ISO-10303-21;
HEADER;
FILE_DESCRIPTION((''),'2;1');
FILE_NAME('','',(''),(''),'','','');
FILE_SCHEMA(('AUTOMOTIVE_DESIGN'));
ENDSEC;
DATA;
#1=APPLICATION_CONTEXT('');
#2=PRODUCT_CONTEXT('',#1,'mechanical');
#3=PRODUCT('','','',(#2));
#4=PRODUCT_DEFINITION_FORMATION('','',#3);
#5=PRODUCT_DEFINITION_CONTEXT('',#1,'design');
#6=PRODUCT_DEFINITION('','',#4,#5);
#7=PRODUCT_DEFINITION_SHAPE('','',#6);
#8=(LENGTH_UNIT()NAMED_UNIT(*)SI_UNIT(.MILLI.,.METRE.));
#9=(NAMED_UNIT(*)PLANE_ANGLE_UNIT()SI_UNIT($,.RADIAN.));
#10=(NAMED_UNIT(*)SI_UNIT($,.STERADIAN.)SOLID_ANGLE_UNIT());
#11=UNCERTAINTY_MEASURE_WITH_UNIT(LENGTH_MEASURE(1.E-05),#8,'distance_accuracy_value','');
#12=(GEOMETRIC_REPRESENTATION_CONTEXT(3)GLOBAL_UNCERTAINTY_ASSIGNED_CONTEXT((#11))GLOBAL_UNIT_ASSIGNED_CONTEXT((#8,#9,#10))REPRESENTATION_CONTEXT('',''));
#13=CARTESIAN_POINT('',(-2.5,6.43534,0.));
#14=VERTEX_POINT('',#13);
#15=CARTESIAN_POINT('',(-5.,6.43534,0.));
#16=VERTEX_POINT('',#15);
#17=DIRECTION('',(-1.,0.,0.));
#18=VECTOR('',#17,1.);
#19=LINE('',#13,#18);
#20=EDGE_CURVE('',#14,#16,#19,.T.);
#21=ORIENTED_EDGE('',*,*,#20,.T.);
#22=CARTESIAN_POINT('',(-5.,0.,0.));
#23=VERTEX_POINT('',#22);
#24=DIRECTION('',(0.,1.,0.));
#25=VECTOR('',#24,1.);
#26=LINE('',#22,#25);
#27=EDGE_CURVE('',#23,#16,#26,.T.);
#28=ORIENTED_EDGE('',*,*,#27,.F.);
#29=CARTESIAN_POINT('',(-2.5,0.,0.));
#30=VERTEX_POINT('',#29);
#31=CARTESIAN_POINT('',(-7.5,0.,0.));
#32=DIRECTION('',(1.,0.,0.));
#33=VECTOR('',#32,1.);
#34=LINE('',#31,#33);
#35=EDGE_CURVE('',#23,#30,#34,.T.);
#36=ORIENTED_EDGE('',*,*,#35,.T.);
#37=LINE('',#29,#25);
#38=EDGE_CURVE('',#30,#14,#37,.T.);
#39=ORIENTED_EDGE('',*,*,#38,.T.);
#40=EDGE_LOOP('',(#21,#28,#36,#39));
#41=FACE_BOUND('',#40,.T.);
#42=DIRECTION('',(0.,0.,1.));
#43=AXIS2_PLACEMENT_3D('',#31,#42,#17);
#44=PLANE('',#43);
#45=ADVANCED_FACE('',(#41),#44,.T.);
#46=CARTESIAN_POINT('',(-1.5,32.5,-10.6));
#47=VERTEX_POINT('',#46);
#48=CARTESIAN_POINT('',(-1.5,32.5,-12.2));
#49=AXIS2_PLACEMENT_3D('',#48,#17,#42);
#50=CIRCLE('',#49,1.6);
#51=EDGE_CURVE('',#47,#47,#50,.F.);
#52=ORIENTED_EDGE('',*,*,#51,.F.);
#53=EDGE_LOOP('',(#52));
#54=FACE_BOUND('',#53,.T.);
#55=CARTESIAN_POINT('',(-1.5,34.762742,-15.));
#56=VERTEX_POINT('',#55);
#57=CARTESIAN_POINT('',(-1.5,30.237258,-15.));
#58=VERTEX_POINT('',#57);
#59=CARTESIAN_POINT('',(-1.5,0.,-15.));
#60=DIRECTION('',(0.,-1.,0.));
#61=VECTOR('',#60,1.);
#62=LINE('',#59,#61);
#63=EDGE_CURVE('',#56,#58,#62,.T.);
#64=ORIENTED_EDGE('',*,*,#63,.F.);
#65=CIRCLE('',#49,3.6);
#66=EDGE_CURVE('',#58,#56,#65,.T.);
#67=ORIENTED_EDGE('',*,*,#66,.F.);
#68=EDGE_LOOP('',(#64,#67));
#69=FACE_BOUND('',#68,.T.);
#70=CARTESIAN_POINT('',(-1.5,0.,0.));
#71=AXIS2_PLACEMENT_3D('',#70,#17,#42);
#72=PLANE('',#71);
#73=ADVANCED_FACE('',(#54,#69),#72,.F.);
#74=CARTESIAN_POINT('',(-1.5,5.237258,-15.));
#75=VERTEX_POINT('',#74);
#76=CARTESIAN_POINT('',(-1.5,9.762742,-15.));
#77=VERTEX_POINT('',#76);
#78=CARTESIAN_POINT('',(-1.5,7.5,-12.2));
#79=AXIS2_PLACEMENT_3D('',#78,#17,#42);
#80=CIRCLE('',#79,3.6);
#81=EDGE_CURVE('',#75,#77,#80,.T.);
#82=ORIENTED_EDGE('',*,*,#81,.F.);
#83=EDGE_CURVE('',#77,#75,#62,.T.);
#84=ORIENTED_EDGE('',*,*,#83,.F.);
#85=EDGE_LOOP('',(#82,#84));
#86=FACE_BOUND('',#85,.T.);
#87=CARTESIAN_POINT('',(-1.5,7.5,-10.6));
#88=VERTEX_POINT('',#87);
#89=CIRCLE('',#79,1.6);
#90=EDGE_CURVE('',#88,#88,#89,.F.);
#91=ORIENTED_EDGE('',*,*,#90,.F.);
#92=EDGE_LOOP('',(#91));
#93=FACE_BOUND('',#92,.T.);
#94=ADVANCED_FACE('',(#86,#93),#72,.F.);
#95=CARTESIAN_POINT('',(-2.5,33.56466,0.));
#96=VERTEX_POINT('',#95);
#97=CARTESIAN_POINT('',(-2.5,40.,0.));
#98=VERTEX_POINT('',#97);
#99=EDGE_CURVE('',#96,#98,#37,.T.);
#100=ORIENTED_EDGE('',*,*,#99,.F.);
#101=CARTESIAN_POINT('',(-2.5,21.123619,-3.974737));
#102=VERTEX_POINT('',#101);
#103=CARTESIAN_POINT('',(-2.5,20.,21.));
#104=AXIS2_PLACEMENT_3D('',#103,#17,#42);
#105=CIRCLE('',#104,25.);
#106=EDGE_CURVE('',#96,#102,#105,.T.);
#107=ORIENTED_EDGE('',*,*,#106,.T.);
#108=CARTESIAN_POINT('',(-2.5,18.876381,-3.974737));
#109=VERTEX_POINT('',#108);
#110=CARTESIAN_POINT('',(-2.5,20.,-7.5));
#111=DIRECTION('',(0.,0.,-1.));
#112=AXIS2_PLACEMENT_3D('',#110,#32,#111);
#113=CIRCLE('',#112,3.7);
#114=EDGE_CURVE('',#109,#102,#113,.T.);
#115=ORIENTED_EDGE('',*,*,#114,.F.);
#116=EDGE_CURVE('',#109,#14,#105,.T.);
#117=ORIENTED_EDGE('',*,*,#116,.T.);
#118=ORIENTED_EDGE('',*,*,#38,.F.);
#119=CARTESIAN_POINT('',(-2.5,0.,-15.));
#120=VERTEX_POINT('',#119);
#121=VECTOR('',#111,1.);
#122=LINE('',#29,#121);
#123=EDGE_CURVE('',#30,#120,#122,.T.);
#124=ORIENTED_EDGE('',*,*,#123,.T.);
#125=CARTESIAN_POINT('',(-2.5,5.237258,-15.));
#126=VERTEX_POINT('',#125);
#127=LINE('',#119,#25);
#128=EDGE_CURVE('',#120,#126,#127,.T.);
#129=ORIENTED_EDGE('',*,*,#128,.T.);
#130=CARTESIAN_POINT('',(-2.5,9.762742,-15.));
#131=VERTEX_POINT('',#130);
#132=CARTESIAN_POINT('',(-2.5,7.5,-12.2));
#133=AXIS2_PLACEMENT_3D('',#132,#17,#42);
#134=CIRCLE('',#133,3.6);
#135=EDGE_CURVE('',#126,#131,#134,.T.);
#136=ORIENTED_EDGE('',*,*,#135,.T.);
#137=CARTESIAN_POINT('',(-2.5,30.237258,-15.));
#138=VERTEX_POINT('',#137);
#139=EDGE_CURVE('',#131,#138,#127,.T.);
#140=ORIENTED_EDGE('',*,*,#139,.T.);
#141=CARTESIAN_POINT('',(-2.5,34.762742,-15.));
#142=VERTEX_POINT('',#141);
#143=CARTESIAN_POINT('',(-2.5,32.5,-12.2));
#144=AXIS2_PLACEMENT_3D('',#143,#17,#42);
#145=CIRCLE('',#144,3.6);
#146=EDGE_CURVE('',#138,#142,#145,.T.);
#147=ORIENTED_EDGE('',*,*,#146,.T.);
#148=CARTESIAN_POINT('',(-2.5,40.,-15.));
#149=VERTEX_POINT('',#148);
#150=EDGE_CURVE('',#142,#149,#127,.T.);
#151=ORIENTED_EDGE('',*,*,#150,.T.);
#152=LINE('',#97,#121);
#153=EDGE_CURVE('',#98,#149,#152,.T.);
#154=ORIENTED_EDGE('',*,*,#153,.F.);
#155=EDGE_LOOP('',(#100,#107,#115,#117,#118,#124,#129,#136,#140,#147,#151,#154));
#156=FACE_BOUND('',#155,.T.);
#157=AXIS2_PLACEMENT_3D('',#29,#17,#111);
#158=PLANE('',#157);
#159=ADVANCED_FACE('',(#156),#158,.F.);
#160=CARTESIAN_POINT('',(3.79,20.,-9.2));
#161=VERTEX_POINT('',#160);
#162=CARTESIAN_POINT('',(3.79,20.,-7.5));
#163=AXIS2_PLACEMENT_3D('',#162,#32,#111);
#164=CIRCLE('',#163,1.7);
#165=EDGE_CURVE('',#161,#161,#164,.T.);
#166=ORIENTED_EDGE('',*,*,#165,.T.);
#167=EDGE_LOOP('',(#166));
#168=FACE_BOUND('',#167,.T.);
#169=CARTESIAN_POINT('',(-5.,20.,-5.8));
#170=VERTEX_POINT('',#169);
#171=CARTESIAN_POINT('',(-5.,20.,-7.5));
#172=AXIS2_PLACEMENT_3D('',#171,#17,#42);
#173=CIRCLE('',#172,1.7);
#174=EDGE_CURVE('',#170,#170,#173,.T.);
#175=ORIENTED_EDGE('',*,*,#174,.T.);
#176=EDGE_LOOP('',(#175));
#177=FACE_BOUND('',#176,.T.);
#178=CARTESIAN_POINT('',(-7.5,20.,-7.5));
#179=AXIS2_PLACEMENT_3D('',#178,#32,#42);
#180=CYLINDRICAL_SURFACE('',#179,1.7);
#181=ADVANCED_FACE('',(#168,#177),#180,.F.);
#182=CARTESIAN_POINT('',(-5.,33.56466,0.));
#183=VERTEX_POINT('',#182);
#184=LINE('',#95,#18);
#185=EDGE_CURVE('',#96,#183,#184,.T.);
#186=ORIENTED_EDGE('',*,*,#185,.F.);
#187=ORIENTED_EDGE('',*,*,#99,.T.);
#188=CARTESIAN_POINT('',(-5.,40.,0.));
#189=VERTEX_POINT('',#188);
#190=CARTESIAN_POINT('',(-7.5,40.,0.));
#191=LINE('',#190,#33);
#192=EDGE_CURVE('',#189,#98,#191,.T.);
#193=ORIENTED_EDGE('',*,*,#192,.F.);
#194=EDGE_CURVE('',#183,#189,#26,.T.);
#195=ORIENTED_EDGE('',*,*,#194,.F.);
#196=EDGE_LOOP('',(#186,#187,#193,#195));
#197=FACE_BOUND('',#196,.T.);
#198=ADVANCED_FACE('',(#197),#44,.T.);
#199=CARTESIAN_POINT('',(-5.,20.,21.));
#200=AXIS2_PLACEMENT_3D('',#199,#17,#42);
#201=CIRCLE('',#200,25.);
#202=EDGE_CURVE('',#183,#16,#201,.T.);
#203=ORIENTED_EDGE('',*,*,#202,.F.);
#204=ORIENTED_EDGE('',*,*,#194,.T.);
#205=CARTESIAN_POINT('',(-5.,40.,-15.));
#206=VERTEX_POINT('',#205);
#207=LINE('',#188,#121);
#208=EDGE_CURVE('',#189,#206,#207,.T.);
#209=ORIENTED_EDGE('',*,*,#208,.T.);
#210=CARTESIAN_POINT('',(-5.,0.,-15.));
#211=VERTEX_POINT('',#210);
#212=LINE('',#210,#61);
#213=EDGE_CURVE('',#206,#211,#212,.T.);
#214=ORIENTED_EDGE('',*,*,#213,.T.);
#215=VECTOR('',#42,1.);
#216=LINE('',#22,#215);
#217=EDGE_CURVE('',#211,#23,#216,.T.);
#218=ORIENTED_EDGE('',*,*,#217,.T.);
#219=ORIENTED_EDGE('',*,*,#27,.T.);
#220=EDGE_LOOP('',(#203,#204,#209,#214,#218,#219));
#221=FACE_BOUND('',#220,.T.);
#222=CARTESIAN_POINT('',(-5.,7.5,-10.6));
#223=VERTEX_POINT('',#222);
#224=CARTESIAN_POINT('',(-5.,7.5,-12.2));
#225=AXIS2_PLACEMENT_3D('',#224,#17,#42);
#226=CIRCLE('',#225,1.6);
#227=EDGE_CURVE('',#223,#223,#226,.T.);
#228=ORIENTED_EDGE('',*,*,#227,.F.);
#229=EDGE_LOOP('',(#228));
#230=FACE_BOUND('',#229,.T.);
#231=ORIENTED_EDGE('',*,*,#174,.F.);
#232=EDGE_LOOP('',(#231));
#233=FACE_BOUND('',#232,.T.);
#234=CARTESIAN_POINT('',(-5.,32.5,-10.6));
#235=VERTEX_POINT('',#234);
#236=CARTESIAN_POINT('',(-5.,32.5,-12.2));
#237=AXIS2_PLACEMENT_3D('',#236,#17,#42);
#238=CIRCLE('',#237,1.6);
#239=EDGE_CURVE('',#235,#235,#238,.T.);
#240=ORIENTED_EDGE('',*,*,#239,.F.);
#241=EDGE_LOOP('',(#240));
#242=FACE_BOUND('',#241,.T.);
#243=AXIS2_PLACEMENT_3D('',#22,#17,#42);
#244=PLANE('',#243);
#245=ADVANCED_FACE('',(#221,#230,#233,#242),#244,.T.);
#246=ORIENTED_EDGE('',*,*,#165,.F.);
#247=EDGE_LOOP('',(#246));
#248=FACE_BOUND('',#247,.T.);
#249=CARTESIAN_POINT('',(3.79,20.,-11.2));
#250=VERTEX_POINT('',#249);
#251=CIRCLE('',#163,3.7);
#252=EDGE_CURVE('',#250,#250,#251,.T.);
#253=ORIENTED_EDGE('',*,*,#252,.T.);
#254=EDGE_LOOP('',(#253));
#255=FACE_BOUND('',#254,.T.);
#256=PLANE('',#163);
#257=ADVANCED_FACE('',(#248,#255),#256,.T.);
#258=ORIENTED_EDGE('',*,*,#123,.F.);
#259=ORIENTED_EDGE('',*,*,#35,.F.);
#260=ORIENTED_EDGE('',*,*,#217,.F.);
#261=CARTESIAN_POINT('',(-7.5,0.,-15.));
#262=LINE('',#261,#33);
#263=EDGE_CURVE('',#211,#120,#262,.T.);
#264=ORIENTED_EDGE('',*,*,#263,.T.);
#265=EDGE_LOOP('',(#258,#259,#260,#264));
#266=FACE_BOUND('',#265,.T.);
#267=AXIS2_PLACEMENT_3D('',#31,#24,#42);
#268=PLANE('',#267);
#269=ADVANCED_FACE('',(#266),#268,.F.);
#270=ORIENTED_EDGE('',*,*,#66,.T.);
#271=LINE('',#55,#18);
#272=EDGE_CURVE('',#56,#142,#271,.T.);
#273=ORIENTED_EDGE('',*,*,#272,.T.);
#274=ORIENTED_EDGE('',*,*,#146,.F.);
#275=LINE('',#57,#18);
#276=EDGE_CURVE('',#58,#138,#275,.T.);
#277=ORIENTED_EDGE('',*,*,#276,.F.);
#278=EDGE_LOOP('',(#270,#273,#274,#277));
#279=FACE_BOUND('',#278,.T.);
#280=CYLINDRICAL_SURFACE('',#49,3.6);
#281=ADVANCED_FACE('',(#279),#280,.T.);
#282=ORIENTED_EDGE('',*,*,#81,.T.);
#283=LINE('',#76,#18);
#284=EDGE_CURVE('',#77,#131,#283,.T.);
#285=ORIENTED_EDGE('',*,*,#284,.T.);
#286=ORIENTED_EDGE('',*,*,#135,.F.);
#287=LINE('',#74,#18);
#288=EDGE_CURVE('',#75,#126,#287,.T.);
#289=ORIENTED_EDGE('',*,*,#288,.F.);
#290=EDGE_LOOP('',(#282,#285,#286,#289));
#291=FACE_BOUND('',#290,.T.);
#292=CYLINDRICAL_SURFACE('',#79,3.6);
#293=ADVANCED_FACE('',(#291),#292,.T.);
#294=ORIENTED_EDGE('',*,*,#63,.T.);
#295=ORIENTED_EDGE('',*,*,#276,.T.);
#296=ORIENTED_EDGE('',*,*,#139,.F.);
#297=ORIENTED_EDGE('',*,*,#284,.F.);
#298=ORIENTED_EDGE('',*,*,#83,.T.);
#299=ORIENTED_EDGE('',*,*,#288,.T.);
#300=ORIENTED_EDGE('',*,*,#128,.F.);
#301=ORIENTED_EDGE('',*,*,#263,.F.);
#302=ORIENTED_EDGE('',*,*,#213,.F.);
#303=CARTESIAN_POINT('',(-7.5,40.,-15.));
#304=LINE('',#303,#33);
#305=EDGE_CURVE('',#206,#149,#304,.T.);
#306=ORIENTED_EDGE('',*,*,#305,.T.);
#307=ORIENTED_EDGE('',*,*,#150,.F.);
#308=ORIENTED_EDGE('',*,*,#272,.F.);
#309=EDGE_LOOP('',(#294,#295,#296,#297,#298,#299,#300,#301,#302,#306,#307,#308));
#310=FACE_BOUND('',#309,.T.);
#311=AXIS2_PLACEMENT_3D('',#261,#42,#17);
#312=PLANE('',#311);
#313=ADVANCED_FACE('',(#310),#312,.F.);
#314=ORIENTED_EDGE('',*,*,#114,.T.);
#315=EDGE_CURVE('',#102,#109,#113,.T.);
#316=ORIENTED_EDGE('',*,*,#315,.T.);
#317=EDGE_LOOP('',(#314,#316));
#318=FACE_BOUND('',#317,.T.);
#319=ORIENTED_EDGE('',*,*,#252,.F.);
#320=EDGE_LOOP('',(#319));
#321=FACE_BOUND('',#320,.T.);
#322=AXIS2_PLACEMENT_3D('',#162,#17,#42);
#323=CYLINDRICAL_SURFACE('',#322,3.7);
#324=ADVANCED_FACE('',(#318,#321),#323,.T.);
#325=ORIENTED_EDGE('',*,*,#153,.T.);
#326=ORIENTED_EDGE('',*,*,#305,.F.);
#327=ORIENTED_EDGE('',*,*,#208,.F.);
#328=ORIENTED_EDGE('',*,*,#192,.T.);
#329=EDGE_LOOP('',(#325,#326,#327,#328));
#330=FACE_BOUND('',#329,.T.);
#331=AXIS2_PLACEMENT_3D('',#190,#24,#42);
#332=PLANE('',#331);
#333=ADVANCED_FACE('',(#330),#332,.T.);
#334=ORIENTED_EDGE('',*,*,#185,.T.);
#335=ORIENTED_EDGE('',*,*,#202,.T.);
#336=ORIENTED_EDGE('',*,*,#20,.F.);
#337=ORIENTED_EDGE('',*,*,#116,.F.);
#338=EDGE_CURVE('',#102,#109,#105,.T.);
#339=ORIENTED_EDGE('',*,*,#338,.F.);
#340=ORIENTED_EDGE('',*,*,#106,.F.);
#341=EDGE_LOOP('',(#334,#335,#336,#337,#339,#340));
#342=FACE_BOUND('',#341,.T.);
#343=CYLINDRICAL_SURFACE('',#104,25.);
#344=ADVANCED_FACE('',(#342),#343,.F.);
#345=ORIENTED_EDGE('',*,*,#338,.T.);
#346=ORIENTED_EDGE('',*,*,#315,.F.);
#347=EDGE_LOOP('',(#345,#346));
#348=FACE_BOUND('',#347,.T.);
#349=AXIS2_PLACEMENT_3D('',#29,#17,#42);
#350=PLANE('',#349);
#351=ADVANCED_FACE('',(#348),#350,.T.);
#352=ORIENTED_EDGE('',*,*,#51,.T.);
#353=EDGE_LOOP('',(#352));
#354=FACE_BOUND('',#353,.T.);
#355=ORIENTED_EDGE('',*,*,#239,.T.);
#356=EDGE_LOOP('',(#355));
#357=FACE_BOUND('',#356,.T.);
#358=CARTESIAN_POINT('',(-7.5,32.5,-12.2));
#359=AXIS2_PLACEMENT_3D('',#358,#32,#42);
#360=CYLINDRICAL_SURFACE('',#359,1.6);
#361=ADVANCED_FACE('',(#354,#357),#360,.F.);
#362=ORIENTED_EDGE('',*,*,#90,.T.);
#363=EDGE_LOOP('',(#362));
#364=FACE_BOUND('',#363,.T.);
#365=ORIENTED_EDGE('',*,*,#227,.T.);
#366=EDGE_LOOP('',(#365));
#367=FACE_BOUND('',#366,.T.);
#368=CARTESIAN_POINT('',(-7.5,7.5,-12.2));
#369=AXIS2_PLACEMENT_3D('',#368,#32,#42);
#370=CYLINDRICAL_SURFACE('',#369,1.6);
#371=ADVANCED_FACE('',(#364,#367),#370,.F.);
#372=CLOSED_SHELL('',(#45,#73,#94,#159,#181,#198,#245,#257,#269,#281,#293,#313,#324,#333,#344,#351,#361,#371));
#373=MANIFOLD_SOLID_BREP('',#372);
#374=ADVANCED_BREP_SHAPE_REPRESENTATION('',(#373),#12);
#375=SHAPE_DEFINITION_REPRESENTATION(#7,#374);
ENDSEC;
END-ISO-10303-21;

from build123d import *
from build123d.topology import SkipClean

# Parameters (mm, degrees)
SKETCH1_R           = 1.6
BOSS_EXTRUDE1_DEPTH = 2.5
BOSS_EXTRUDE2_START = -2.5
SKETCH1_3_W         = 15
SKETCH1_3_H         = 40
SKETCH1_3_R         = 1.7
SKETCH1_3_R_2       = 1.6
BOSS_EXTRUDE2_DEPTH = 2.5
SKETCH3_R           = 3.7
SKETCH3_R_2         = 1.7
EXTRUDE_THIN2_DEPTH = 6.29
SKETCH4_W           = 15
SKETCH4_H           = 40
CUT_EXTRUDE1_DEPTH  = 2.5
CUT_EXTRUDE2_DEPTH  = 2.5
SKETCH2_R           = 1.6
BOSS_EXTRUDE3_DEPTH = 1


with BuildPart() as part:
    # Sketch1 → Boss-Extrude1 (new body)
    # profile 1 of 8: a face of its own
    with BuildSketch(Plane(origin=(0, 0, 0), x_dir=(0, 0, -1), z_dir=(1, 0, 0))):
        with BuildLine():
            Line((7.5, 21.7), (7.5, 40))
            Line((7.5, 40), (0, 40))
            Line((0, 40), (0, 0))
            Line((0, 0), (7.5, 0))
            Line((7.5, 0), (7.5, 6.4))
            ThreePointArc((7.5, 6.4), (5.9, 8), (7.5, 9.6))
            Line((7.5, 9.6), (7.5, 18.3))
            ThreePointArc((7.5, 18.3), (5.8, 20), (7.5, 21.7))
        make_face()
    # profile 2 of 8: a face of its own
    with BuildSketch(Plane(origin=(0, 0, 0), x_dir=(0, 0, -1), z_dir=(1, 0, 0))):
        with BuildLine():
            Line((15, 40), (7.5, 40))
            Line((7.5, 40), (7.5, 21.7))
            ThreePointArc((7.5, 21.7), (8.702081528, 21.202081528), (9.2, 20))
            ThreePointArc((9.2, 20), (8.702081528, 18.797918472), (7.5, 18.3))
            Line((7.5, 18.3), (7.5, 9.6))
            ThreePointArc((7.5, 9.6), (8.63137085, 9.13137085), (9.1, 8))
            ThreePointArc((9.1, 8), (8.63137085, 6.86862915), (7.5, 6.4))
            Line((7.5, 6.4), (7.5, 0))
            Line((7.5, 0), (15, 0))
            Line((15, 0), (15, 5.883419246))
            Line((15, 5.883419246), (12.2, 4.266838493))
            Line((12.2, 4.266838493), (9.4, 5.883419246))
            Line((9.4, 5.883419246), (9.4, 9.116580754))
            Line((9.4, 9.116580754), (12.2, 10.733161507))
            Line((12.2, 10.733161507), (15, 9.116580754))
            Line((15, 9.116580754), (15, 30.883419246))
            Line((15, 30.883419246), (12.2, 29.266838493))
            Line((12.2, 29.266838493), (9.4, 30.883419246))
            Line((9.4, 30.883419246), (9.4, 34.116580754))
            Line((9.4, 34.116580754), (12.2, 35.733161507))
            Line((12.2, 35.733161507), (15, 34.116580754))
            Line((15, 34.116580754), (15, 40))
        make_face()
    # profile 3 of 8: a face of its own
    with BuildSketch(Plane(origin=(0, 0, 0), x_dir=(0, 0, -1), z_dir=(1, 0, 0))):
        with BuildLine():
            ThreePointArc((9.1, 8), (8.63137085, 9.13137085), (7.5, 9.6))
            Line((7.5, 9.6), (7.5, 6.4))
            ThreePointArc((7.5, 6.4), (8.63137085, 6.86862915), (9.1, 8))
        make_face()
    # profile 4 of 8: a face of its own
    with BuildSketch(Plane(origin=(0, 0, 0), x_dir=(0, 0, -1), z_dir=(1, 0, 0))):
        with BuildLine():
            Line((7.5, 6.4), (7.5, 9.6))
            ThreePointArc((7.5, 9.6), (5.9, 8), (7.5, 6.4))
        make_face()
    # profile 5 of 8: a face of its own
    with BuildSketch(Plane(origin=(0, 0, 0), x_dir=(0, 0, -1), z_dir=(1, 0, 0))):
        with BuildLine():
            ThreePointArc((9.1, 8), (8.63137085, 9.13137085), (7.5, 9.6))
            Line((7.5, 9.6), (7.5, 6.4))
            ThreePointArc((7.5, 6.4), (8.63137085, 6.86862915), (9.1, 8))
        make_face()
    # profile 6 of 8: a face of its own
    with BuildSketch(Plane(origin=(0, 0, 0), x_dir=(0, 0, -1), z_dir=(1, 0, 0))):
        with BuildLine():
            Line((7.5, 6.4), (7.5, 9.6))
            ThreePointArc((7.5, 9.6), (5.9, 8), (7.5, 6.4))
        make_face()
    # profile 7 of 8: a face of its own
    with BuildSketch(Plane(origin=(0, 0, 0), x_dir=(0, 0, -1), z_dir=(1, 0, 0))):
        Polygon((15, 5.883419246), (15, 9.116580754), (12.2, 10.733161507), (9.4, 9.116580754), (9.4, 5.883419246), (12.2, 4.266838493), align=None)
        with Locations((12.2, 7.5)):
            Circle(SKETCH1_R, mode=Mode.SUBTRACT)
    # profile 8 of 8: a face of its own
    with BuildSketch(Plane(origin=(0, 0, 0), x_dir=(0, 0, -1), z_dir=(1, 0, 0))):
        Polygon((15, 30.883419246), (15, 34.116580754), (12.2, 35.733161507), (9.4, 34.116580754), (9.4, 30.883419246), (12.2, 29.266838493), align=None)
        with Locations((12.2, 32.5)):
            Circle(SKETCH1_R, mode=Mode.SUBTRACT)
    extrude(amount=BOSS_EXTRUDE1_DEPTH)

    # Sketch1<3> → Boss-Extrude2 (add)
    with SkipClean():  # the faces are left unmerged after this step: merging them gives an invalid solid
        with BuildSketch(Plane(origin=(0, 0, 0), x_dir=(0, 0, -1), z_dir=(1, 0, 0)).offset(BOSS_EXTRUDE2_START)):
            with Locations((7.5, 20)):
                Rectangle(SKETCH1_3_W, SKETCH1_3_H)
            with Locations((7.5, 20)):
                Circle(SKETCH1_3_R, mode=Mode.SUBTRACT)
            with Locations((12.2, 32.5)):
                Circle(SKETCH1_3_R_2, mode=Mode.SUBTRACT)
            with Locations((12.2, 7.5)):
                Circle(SKETCH1_3_R_2, mode=Mode.SUBTRACT)
        extrude(amount=BOSS_EXTRUDE2_DEPTH)


with BuildPart() as part_1:
    # Body-Move/Copy1: moved
    add(part.part.moved(Location((-5, 0, 0))))

    # Sketch3 → Extrude-Thin2 (add)
    with SkipClean():  # the faces are left unmerged after this step: merging them gives an invalid solid
        with BuildSketch(Plane(origin=(-2.5, 0, 0), x_dir=(0, 0, -1), z_dir=(1, 0, 0))):
            with Locations((7.5, 20)):
                Circle(SKETCH3_R)
            with Locations((7.5, 20)):
                Circle(SKETCH3_R_2, mode=Mode.SUBTRACT)
        extrude(amount=EXTRUDE_THIN2_DEPTH)
    add(part_1.part.scale(1), mode=Mode.REPLACE)  # the faces are merged on a copy

    # Sketch4 → Cut-Extrude1 (cut)
    with BuildSketch(Plane.ZY.offset(7.5)):
        with Locations((-7.5, 20)):
            Rectangle(SKETCH4_W, SKETCH4_H)
    extrude(amount=-CUT_EXTRUDE1_DEPTH, mode=Mode.SUBTRACT)

    # Sketch5 → Cut-Extrude2 (cut)
    with BuildSketch(Plane.ZY.offset(5)):
        with BuildLine():
            ThreePointArc((0, 33.564659966), (-2.979157617, 27.071067812), (-4, 20))
            Line((-4, 20), (0, 20))
            Line((0, 20), (0, 33.564659966))
        make_face()
        with BuildLine():
            Line((0, 20), (-4, 20))
            ThreePointArc((-4, 20), (-2.979157617, 12.928932188), (0, 6.435340034))
            Line((0, 6.435340034), (0, 20))
        make_face()
        with BuildLine():
            Line((0, 33.564659966), (0, 20))
            Line((0, 20), (0, 6.435340034))
            ThreePointArc((0, 6.435340034), (28.071067812, -3.979157617), (46, 20))
            ThreePointArc((46, 20), (28.071067812, 43.979157617), (0, 33.564659966))
        make_face()
    extrude(amount=-CUT_EXTRUDE2_DEPTH, mode=Mode.SUBTRACT)

    # Sketch2 → Boss-Extrude3 (add)
    # profile 1 of 2: a face of its own
    with BuildSketch(Plane.ZY.offset(2.5)):
        with BuildLine():
            Line((-15, 9.7627417), (-15, 5.2372583))
            ThreePointArc((-15, 5.2372583), (-11, 4.10588745), (-8.6, 7.5))
            ThreePointArc((-8.6, 7.5), (-11, 10.89411255), (-15, 9.7627417))
        make_face()
        with Locations((-12.2, 7.5)):
            Circle(SKETCH2_R, mode=Mode.SUBTRACT)
    # profile 2 of 2: a face of its own
    with BuildSketch(Plane.ZY.offset(2.5)):
        with BuildLine():
            Line((-15, 34.7627417), (-15, 30.2372583))
            ThreePointArc((-15, 30.2372583), (-11, 29.10588745), (-8.6, 32.5))
            ThreePointArc((-8.6, 32.5), (-11, 35.89411255), (-15, 34.7627417))
        make_face()
        with Locations((-12.2, 32.5)):
            Circle(SKETCH2_R, mode=Mode.SUBTRACT)
    extrude(amount=-BOSS_EXTRUDE3_DEPTH)


solid = part_1.part
